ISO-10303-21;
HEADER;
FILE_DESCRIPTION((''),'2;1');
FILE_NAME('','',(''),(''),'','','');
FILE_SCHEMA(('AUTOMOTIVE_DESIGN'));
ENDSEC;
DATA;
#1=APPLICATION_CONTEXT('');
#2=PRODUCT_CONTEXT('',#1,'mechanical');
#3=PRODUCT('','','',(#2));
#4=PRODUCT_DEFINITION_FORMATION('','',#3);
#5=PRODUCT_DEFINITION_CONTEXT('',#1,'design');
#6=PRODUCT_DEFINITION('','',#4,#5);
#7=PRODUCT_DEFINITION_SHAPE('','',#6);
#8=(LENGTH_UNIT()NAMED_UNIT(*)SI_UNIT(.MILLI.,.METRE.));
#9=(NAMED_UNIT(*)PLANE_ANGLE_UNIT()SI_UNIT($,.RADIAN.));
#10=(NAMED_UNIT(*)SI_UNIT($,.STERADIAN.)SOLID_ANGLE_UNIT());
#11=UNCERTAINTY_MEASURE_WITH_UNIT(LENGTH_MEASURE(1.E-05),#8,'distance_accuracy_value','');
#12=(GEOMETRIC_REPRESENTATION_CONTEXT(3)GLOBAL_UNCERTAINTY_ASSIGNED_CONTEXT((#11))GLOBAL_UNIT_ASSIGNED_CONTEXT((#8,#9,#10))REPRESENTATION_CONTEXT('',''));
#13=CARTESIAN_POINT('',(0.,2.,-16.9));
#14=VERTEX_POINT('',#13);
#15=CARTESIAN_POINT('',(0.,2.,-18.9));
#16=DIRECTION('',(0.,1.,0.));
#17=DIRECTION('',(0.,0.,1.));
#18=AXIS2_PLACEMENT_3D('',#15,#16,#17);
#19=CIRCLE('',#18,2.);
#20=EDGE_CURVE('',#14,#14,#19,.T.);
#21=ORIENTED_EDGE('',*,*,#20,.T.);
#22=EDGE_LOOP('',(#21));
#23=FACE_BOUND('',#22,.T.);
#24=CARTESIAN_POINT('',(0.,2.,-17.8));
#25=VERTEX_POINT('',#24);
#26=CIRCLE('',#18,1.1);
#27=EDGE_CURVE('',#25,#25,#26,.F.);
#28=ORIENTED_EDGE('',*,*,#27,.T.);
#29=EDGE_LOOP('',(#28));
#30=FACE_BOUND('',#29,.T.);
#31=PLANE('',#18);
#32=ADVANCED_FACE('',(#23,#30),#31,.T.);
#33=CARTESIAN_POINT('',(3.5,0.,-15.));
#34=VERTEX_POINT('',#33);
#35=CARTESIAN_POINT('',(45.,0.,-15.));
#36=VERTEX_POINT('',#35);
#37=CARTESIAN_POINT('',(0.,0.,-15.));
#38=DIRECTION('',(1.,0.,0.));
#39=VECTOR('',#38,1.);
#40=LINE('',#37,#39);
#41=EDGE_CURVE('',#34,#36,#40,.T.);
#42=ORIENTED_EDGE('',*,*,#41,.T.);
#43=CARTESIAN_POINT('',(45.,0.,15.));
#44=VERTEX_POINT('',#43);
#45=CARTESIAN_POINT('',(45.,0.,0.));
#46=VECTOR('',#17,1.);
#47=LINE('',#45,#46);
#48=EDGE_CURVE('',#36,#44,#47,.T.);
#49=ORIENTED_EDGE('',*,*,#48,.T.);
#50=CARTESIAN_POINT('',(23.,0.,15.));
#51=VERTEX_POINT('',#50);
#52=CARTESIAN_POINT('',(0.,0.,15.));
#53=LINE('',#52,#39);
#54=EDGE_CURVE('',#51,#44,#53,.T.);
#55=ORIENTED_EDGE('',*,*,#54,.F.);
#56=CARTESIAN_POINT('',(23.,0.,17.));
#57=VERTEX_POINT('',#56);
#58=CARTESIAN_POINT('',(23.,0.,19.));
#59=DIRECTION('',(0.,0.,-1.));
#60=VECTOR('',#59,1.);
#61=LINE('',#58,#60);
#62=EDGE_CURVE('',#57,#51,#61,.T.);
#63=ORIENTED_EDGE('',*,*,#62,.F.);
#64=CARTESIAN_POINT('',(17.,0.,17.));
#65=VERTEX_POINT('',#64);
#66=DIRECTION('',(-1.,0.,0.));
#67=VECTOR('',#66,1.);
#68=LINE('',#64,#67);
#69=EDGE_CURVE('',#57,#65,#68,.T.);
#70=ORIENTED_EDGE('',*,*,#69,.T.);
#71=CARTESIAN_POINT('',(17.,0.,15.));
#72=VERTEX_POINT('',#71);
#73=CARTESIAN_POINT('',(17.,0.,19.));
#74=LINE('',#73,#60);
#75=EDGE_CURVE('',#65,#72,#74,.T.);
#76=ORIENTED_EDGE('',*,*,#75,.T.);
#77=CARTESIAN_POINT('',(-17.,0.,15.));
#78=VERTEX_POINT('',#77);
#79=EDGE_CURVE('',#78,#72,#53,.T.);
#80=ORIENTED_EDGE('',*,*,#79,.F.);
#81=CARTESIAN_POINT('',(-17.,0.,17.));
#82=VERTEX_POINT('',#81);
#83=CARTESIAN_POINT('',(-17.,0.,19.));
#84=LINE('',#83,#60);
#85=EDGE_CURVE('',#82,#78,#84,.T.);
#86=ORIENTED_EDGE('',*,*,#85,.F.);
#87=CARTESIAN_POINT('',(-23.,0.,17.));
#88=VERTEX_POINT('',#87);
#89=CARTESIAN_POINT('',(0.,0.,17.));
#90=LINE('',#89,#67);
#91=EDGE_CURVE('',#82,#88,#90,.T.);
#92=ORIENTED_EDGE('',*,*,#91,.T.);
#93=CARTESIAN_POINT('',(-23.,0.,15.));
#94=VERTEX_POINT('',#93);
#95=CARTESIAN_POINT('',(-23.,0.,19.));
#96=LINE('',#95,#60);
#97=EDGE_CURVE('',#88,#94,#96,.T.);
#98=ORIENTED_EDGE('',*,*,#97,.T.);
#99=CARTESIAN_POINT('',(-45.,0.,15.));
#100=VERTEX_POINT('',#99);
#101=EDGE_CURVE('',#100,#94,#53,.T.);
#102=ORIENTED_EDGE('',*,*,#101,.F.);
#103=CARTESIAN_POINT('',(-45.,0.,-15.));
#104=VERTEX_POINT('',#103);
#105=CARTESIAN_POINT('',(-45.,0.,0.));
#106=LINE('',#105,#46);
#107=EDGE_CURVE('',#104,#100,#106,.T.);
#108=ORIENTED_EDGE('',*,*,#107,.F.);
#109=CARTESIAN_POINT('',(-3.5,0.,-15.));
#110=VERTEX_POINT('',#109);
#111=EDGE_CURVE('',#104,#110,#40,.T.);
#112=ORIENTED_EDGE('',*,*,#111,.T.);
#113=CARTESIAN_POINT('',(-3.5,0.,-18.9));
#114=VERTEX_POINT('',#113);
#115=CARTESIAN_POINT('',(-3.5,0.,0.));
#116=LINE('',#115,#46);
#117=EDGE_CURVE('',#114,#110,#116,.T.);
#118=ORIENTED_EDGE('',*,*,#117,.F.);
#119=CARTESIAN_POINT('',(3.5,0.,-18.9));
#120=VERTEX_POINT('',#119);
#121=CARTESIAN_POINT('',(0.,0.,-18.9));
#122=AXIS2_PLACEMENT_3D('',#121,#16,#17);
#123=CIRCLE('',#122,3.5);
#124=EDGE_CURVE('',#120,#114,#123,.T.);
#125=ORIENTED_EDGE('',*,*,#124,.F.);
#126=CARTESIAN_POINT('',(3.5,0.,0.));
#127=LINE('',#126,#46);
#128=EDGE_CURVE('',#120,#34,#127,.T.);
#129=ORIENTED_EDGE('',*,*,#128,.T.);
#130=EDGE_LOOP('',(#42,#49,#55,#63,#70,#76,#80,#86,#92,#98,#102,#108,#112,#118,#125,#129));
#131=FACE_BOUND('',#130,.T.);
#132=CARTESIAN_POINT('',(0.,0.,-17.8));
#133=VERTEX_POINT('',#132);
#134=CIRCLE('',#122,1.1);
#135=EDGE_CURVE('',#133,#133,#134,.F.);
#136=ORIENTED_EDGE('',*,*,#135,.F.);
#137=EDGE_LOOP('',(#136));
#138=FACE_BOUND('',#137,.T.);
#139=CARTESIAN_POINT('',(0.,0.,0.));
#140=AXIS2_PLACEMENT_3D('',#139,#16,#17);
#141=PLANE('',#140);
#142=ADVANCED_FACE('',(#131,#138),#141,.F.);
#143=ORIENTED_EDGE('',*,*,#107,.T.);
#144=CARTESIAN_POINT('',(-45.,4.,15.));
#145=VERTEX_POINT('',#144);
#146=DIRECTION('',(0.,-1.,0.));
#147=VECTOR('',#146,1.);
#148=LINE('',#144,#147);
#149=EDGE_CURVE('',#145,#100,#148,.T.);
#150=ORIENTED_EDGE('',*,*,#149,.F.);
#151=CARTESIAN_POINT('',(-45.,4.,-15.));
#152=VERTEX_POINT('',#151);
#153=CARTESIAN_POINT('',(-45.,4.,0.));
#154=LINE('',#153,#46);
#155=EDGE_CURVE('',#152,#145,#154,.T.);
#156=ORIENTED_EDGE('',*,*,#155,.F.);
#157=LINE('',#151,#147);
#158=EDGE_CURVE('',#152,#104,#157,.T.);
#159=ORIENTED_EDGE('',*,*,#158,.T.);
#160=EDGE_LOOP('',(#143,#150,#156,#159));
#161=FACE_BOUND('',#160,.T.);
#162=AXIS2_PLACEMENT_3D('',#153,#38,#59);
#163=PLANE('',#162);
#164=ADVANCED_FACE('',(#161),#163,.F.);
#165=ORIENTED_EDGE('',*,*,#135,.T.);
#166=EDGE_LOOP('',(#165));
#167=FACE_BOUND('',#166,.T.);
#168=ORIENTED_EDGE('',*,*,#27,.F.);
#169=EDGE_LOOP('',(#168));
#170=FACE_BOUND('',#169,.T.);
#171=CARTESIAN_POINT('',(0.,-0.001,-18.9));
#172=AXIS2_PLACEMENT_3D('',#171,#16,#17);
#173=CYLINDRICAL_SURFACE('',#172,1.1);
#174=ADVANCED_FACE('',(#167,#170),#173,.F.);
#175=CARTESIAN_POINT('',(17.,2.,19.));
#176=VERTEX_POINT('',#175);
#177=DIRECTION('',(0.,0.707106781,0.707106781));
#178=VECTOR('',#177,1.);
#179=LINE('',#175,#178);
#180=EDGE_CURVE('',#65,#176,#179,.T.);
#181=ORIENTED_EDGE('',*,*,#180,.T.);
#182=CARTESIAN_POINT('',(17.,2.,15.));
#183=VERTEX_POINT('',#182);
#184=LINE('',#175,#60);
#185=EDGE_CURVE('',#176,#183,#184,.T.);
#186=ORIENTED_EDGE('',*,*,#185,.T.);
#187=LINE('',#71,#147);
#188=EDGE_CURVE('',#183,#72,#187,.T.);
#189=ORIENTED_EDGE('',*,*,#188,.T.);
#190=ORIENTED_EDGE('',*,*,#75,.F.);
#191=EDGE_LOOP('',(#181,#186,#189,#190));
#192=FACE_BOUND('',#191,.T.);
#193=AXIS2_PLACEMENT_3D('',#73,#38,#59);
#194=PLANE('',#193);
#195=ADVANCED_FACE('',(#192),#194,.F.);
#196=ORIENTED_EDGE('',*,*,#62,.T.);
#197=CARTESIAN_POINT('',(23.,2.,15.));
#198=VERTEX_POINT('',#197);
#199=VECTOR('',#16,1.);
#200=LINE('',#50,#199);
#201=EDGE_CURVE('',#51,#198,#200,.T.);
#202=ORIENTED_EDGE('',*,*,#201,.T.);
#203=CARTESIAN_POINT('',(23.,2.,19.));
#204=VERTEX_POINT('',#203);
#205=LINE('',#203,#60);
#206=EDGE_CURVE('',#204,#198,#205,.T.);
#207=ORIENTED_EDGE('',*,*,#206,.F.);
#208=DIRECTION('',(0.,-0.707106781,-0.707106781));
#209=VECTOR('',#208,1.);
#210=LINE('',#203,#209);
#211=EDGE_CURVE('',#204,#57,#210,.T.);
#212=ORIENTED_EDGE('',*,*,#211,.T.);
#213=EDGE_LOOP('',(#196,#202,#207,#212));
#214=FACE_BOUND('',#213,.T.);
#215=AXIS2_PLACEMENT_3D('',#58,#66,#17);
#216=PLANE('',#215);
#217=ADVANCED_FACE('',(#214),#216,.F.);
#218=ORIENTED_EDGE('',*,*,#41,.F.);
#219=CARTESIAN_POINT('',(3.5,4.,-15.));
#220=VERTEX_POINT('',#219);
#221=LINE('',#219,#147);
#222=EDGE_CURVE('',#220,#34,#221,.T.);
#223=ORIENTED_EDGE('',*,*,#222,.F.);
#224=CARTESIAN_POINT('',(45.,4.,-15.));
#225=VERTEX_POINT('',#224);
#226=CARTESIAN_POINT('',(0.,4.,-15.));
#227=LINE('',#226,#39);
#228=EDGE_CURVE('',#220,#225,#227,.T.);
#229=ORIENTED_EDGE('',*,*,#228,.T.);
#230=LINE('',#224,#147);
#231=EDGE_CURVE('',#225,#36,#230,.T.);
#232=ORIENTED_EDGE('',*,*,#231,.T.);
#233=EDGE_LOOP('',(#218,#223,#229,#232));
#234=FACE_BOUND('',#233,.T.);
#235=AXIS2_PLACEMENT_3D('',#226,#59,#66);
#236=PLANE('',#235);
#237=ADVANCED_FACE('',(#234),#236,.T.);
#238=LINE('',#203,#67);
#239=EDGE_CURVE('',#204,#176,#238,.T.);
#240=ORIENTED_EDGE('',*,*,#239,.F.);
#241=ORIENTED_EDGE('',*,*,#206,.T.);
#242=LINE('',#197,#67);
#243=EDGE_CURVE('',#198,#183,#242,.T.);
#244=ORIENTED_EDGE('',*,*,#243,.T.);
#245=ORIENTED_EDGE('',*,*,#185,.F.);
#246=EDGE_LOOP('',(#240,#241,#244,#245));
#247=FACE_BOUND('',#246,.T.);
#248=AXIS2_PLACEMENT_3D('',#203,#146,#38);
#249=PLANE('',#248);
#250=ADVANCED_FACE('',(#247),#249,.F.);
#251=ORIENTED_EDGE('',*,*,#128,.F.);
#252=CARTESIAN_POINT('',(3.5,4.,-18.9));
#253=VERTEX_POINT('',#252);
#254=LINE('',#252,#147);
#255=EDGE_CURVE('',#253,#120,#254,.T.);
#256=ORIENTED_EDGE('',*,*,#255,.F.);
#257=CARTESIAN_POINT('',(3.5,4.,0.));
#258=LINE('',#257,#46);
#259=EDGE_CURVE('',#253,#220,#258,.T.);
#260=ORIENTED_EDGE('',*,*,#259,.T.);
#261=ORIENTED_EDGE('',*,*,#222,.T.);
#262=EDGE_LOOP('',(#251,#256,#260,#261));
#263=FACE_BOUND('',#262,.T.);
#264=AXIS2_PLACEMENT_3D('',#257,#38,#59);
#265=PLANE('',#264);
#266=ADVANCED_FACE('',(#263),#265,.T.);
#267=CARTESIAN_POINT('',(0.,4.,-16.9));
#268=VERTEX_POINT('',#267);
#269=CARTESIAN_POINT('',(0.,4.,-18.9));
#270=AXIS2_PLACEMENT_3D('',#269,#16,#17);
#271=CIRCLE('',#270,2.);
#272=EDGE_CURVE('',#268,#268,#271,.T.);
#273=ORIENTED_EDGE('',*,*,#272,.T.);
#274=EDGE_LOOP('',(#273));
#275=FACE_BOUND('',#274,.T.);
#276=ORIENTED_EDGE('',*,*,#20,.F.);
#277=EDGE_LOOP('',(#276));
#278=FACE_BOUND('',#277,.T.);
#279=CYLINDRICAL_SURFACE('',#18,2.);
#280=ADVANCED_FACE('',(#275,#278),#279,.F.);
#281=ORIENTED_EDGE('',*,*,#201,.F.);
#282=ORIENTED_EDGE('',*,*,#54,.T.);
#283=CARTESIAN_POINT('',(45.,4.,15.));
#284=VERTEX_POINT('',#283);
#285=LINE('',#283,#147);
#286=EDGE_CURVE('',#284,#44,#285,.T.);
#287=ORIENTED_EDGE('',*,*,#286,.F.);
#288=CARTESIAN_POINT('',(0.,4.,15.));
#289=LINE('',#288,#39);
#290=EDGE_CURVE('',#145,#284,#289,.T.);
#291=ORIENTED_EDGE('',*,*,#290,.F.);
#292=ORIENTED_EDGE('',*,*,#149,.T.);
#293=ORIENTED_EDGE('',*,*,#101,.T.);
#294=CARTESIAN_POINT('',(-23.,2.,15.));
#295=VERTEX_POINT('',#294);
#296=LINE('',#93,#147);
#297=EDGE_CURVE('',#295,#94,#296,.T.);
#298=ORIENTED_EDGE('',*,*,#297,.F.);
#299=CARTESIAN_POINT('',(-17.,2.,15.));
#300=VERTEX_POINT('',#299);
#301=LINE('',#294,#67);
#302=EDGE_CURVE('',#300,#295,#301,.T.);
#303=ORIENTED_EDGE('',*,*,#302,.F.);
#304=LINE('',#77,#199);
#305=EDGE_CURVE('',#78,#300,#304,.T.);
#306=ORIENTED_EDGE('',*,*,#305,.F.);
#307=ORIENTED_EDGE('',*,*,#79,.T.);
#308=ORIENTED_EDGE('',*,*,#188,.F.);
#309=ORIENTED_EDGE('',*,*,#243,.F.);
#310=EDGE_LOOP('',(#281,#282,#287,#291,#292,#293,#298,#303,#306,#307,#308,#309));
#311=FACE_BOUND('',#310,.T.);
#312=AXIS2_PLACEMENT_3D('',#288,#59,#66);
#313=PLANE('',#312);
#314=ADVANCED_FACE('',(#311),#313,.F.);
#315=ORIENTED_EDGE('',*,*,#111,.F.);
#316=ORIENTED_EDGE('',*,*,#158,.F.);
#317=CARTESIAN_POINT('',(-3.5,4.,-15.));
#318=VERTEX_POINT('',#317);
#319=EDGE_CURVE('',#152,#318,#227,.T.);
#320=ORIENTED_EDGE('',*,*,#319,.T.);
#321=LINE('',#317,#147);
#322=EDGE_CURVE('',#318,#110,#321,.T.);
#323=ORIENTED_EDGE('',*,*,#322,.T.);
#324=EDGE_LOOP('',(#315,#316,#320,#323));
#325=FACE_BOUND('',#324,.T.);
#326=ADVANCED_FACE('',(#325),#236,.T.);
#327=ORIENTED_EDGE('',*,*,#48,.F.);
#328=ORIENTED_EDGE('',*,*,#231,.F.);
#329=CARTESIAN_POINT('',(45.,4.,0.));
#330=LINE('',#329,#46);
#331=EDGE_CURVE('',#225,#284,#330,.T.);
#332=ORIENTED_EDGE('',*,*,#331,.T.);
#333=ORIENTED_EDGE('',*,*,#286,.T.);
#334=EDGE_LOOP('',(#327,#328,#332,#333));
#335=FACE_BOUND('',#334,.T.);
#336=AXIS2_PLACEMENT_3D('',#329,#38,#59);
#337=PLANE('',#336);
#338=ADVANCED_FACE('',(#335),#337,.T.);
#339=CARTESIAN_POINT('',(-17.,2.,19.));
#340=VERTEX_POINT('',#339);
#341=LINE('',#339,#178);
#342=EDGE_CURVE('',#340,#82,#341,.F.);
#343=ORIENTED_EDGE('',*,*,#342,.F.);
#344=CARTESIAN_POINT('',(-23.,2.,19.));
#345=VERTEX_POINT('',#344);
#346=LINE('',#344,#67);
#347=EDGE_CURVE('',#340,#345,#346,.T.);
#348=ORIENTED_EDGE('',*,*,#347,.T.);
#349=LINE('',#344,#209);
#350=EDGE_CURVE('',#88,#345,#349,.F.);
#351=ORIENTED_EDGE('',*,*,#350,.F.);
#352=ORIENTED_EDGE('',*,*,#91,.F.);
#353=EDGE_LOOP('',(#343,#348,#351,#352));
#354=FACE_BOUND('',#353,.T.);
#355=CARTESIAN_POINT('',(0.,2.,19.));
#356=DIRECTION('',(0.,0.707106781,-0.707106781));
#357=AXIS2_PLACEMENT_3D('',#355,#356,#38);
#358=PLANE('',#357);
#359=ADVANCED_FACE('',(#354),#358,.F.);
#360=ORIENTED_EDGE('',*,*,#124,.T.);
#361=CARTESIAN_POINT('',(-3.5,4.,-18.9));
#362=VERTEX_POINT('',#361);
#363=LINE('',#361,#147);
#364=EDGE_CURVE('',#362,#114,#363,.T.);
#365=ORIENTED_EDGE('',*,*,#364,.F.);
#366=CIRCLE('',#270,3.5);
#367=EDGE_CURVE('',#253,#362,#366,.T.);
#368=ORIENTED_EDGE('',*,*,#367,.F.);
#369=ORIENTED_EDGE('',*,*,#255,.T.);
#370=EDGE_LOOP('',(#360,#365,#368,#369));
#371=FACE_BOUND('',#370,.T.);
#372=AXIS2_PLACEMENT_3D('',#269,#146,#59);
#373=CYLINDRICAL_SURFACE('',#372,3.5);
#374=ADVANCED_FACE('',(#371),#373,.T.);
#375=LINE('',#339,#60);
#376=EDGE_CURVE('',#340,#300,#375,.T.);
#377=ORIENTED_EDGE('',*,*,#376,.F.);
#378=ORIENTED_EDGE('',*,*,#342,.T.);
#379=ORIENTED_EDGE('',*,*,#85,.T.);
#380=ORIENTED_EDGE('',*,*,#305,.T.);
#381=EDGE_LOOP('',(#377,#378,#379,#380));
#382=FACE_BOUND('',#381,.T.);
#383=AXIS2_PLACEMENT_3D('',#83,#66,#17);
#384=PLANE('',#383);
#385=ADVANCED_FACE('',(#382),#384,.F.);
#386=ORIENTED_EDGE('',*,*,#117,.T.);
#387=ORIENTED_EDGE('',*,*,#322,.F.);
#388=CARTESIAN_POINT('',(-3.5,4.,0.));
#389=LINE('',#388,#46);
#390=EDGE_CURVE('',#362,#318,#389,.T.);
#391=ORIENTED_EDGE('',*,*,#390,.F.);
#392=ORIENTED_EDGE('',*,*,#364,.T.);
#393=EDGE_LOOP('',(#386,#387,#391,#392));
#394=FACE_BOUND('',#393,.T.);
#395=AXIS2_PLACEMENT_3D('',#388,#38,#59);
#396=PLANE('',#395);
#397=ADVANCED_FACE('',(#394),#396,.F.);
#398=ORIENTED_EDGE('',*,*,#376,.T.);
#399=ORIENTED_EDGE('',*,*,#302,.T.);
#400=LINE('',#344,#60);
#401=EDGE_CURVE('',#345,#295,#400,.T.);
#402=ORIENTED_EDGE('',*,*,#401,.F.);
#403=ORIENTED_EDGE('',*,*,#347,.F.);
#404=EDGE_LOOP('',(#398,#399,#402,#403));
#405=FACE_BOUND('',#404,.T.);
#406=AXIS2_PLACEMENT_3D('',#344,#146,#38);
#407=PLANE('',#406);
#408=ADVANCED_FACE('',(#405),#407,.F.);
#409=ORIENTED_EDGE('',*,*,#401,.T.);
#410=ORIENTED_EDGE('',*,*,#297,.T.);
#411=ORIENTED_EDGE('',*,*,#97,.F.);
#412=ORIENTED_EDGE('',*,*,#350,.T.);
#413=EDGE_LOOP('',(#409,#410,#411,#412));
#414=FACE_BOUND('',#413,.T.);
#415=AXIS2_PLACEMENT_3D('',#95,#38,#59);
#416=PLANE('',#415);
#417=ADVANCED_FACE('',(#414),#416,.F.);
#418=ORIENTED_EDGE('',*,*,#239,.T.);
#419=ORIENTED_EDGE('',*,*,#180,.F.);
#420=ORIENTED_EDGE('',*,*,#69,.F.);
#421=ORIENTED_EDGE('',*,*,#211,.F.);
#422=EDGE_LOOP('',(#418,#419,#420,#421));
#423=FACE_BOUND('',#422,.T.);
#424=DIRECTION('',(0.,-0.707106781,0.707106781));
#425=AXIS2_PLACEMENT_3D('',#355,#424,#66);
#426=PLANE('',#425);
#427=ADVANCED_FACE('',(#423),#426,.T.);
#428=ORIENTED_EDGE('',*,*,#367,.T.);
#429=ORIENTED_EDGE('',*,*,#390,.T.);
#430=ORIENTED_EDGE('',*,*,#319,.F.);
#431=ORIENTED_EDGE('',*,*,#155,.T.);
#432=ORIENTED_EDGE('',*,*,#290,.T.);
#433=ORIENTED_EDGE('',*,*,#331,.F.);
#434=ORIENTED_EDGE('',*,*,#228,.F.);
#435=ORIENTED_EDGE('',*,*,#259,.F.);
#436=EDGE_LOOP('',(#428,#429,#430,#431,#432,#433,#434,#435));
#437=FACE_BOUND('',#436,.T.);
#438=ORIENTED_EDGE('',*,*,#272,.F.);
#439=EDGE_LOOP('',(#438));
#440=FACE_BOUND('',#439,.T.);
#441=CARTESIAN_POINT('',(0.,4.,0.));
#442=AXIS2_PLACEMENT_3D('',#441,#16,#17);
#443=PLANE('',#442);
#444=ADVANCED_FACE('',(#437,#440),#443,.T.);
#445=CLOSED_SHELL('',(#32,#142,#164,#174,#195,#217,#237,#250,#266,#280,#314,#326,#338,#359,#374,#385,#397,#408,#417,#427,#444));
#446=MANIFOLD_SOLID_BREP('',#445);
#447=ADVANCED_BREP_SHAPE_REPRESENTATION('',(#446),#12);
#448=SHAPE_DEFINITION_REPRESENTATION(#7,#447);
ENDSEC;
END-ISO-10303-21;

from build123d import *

# Parameters (mm, degrees)
SKETCH1_R           = 3.5
SKETCH1_W           = 90
SKETCH1_H           = 30
SKETCH1_W_2         = 7
SKETCH1_H_2         = 3.9
BOSS_EXTRUDE1_DEPTH = 4
SKETCH4_W           = 6
SKETCH4_H           = 2
BOSS_EXTRUDE2_DEPTH = 4
CHAMFER1_SIZE       = 2
CUT_EXTRUDE1_REACH  = 52.426
SKETCH5_R           = 1.1
SKETCH6_R           = 2
CUT_EXTRUDE2_DEPTH  = 2


with BuildPart() as part:
    # Sketch1 → Boss-Extrude1 (new body)
    with BuildSketch(Plane(origin=(0, 0, 0), x_dir=(1, 0, 0), z_dir=(0, 1, 0))):
        with Locations((0, 18.9)):
            Circle(SKETCH1_R)
        Rectangle(SKETCH1_W, SKETCH1_H)
        with Locations((0, 16.95)):
            Rectangle(SKETCH1_W_2, SKETCH1_H_2)
    extrude(amount=BOSS_EXTRUDE1_DEPTH)

    # Sketch4 → Boss-Extrude2 (add)
    with BuildSketch(Plane.XY.offset(15)):
        with Locations((-20, 1)):
            Rectangle(SKETCH4_W, SKETCH4_H)
        with Locations((20, 1)):
            Rectangle(SKETCH4_W, SKETCH4_H)
    extrude(amount=BOSS_EXTRUDE2_DEPTH)

    # Chamfer1
    chamfer1_edges = [part.edges().sort_by_distance(p)[0] for p in [
        (20, 0, 19),
        (-20, 0, 19),
    ]]
    chamfer(chamfer1_edges, length=CHAMFER1_SIZE - 0.0001)  # a hair under: the kernel refuses the full size

    # Sketch5 → Cut-Extrude1 (cut, up to next)
    with BuildSketch(Plane(origin=(0, 4, 0), x_dir=(1, 0, 0), z_dir=(0, 1, 0)), mode=Mode.PRIVATE) as cut_extrude1_sk1:
        with Locations(Location((0, 18.9, 0), (0, 0, 270))):
            Circle(SKETCH5_R)
    cut_extrude1_tool1 = extrude(cut_extrude1_sk1.sketch, amount=-CUT_EXTRUDE1_REACH, mode=Mode.PRIVATE) & part.part
    add(cut_extrude1_tool1.solids().sort_by_distance((0, 4, -18.9))[0], mode=Mode.SUBTRACT)

    # Sketch6 → Cut-Extrude2 (cut)
    with BuildSketch(Plane(origin=(0, 4, 0), x_dir=(1, 0, 0), z_dir=(0, 1, 0))):
        with Locations(Location((0, 18.9, 0), (0, 0, 270))):
            Circle(SKETCH6_R)
    extrude(amount=-CUT_EXTRUDE2_DEPTH, mode=Mode.SUBTRACT)


solid = part.part
